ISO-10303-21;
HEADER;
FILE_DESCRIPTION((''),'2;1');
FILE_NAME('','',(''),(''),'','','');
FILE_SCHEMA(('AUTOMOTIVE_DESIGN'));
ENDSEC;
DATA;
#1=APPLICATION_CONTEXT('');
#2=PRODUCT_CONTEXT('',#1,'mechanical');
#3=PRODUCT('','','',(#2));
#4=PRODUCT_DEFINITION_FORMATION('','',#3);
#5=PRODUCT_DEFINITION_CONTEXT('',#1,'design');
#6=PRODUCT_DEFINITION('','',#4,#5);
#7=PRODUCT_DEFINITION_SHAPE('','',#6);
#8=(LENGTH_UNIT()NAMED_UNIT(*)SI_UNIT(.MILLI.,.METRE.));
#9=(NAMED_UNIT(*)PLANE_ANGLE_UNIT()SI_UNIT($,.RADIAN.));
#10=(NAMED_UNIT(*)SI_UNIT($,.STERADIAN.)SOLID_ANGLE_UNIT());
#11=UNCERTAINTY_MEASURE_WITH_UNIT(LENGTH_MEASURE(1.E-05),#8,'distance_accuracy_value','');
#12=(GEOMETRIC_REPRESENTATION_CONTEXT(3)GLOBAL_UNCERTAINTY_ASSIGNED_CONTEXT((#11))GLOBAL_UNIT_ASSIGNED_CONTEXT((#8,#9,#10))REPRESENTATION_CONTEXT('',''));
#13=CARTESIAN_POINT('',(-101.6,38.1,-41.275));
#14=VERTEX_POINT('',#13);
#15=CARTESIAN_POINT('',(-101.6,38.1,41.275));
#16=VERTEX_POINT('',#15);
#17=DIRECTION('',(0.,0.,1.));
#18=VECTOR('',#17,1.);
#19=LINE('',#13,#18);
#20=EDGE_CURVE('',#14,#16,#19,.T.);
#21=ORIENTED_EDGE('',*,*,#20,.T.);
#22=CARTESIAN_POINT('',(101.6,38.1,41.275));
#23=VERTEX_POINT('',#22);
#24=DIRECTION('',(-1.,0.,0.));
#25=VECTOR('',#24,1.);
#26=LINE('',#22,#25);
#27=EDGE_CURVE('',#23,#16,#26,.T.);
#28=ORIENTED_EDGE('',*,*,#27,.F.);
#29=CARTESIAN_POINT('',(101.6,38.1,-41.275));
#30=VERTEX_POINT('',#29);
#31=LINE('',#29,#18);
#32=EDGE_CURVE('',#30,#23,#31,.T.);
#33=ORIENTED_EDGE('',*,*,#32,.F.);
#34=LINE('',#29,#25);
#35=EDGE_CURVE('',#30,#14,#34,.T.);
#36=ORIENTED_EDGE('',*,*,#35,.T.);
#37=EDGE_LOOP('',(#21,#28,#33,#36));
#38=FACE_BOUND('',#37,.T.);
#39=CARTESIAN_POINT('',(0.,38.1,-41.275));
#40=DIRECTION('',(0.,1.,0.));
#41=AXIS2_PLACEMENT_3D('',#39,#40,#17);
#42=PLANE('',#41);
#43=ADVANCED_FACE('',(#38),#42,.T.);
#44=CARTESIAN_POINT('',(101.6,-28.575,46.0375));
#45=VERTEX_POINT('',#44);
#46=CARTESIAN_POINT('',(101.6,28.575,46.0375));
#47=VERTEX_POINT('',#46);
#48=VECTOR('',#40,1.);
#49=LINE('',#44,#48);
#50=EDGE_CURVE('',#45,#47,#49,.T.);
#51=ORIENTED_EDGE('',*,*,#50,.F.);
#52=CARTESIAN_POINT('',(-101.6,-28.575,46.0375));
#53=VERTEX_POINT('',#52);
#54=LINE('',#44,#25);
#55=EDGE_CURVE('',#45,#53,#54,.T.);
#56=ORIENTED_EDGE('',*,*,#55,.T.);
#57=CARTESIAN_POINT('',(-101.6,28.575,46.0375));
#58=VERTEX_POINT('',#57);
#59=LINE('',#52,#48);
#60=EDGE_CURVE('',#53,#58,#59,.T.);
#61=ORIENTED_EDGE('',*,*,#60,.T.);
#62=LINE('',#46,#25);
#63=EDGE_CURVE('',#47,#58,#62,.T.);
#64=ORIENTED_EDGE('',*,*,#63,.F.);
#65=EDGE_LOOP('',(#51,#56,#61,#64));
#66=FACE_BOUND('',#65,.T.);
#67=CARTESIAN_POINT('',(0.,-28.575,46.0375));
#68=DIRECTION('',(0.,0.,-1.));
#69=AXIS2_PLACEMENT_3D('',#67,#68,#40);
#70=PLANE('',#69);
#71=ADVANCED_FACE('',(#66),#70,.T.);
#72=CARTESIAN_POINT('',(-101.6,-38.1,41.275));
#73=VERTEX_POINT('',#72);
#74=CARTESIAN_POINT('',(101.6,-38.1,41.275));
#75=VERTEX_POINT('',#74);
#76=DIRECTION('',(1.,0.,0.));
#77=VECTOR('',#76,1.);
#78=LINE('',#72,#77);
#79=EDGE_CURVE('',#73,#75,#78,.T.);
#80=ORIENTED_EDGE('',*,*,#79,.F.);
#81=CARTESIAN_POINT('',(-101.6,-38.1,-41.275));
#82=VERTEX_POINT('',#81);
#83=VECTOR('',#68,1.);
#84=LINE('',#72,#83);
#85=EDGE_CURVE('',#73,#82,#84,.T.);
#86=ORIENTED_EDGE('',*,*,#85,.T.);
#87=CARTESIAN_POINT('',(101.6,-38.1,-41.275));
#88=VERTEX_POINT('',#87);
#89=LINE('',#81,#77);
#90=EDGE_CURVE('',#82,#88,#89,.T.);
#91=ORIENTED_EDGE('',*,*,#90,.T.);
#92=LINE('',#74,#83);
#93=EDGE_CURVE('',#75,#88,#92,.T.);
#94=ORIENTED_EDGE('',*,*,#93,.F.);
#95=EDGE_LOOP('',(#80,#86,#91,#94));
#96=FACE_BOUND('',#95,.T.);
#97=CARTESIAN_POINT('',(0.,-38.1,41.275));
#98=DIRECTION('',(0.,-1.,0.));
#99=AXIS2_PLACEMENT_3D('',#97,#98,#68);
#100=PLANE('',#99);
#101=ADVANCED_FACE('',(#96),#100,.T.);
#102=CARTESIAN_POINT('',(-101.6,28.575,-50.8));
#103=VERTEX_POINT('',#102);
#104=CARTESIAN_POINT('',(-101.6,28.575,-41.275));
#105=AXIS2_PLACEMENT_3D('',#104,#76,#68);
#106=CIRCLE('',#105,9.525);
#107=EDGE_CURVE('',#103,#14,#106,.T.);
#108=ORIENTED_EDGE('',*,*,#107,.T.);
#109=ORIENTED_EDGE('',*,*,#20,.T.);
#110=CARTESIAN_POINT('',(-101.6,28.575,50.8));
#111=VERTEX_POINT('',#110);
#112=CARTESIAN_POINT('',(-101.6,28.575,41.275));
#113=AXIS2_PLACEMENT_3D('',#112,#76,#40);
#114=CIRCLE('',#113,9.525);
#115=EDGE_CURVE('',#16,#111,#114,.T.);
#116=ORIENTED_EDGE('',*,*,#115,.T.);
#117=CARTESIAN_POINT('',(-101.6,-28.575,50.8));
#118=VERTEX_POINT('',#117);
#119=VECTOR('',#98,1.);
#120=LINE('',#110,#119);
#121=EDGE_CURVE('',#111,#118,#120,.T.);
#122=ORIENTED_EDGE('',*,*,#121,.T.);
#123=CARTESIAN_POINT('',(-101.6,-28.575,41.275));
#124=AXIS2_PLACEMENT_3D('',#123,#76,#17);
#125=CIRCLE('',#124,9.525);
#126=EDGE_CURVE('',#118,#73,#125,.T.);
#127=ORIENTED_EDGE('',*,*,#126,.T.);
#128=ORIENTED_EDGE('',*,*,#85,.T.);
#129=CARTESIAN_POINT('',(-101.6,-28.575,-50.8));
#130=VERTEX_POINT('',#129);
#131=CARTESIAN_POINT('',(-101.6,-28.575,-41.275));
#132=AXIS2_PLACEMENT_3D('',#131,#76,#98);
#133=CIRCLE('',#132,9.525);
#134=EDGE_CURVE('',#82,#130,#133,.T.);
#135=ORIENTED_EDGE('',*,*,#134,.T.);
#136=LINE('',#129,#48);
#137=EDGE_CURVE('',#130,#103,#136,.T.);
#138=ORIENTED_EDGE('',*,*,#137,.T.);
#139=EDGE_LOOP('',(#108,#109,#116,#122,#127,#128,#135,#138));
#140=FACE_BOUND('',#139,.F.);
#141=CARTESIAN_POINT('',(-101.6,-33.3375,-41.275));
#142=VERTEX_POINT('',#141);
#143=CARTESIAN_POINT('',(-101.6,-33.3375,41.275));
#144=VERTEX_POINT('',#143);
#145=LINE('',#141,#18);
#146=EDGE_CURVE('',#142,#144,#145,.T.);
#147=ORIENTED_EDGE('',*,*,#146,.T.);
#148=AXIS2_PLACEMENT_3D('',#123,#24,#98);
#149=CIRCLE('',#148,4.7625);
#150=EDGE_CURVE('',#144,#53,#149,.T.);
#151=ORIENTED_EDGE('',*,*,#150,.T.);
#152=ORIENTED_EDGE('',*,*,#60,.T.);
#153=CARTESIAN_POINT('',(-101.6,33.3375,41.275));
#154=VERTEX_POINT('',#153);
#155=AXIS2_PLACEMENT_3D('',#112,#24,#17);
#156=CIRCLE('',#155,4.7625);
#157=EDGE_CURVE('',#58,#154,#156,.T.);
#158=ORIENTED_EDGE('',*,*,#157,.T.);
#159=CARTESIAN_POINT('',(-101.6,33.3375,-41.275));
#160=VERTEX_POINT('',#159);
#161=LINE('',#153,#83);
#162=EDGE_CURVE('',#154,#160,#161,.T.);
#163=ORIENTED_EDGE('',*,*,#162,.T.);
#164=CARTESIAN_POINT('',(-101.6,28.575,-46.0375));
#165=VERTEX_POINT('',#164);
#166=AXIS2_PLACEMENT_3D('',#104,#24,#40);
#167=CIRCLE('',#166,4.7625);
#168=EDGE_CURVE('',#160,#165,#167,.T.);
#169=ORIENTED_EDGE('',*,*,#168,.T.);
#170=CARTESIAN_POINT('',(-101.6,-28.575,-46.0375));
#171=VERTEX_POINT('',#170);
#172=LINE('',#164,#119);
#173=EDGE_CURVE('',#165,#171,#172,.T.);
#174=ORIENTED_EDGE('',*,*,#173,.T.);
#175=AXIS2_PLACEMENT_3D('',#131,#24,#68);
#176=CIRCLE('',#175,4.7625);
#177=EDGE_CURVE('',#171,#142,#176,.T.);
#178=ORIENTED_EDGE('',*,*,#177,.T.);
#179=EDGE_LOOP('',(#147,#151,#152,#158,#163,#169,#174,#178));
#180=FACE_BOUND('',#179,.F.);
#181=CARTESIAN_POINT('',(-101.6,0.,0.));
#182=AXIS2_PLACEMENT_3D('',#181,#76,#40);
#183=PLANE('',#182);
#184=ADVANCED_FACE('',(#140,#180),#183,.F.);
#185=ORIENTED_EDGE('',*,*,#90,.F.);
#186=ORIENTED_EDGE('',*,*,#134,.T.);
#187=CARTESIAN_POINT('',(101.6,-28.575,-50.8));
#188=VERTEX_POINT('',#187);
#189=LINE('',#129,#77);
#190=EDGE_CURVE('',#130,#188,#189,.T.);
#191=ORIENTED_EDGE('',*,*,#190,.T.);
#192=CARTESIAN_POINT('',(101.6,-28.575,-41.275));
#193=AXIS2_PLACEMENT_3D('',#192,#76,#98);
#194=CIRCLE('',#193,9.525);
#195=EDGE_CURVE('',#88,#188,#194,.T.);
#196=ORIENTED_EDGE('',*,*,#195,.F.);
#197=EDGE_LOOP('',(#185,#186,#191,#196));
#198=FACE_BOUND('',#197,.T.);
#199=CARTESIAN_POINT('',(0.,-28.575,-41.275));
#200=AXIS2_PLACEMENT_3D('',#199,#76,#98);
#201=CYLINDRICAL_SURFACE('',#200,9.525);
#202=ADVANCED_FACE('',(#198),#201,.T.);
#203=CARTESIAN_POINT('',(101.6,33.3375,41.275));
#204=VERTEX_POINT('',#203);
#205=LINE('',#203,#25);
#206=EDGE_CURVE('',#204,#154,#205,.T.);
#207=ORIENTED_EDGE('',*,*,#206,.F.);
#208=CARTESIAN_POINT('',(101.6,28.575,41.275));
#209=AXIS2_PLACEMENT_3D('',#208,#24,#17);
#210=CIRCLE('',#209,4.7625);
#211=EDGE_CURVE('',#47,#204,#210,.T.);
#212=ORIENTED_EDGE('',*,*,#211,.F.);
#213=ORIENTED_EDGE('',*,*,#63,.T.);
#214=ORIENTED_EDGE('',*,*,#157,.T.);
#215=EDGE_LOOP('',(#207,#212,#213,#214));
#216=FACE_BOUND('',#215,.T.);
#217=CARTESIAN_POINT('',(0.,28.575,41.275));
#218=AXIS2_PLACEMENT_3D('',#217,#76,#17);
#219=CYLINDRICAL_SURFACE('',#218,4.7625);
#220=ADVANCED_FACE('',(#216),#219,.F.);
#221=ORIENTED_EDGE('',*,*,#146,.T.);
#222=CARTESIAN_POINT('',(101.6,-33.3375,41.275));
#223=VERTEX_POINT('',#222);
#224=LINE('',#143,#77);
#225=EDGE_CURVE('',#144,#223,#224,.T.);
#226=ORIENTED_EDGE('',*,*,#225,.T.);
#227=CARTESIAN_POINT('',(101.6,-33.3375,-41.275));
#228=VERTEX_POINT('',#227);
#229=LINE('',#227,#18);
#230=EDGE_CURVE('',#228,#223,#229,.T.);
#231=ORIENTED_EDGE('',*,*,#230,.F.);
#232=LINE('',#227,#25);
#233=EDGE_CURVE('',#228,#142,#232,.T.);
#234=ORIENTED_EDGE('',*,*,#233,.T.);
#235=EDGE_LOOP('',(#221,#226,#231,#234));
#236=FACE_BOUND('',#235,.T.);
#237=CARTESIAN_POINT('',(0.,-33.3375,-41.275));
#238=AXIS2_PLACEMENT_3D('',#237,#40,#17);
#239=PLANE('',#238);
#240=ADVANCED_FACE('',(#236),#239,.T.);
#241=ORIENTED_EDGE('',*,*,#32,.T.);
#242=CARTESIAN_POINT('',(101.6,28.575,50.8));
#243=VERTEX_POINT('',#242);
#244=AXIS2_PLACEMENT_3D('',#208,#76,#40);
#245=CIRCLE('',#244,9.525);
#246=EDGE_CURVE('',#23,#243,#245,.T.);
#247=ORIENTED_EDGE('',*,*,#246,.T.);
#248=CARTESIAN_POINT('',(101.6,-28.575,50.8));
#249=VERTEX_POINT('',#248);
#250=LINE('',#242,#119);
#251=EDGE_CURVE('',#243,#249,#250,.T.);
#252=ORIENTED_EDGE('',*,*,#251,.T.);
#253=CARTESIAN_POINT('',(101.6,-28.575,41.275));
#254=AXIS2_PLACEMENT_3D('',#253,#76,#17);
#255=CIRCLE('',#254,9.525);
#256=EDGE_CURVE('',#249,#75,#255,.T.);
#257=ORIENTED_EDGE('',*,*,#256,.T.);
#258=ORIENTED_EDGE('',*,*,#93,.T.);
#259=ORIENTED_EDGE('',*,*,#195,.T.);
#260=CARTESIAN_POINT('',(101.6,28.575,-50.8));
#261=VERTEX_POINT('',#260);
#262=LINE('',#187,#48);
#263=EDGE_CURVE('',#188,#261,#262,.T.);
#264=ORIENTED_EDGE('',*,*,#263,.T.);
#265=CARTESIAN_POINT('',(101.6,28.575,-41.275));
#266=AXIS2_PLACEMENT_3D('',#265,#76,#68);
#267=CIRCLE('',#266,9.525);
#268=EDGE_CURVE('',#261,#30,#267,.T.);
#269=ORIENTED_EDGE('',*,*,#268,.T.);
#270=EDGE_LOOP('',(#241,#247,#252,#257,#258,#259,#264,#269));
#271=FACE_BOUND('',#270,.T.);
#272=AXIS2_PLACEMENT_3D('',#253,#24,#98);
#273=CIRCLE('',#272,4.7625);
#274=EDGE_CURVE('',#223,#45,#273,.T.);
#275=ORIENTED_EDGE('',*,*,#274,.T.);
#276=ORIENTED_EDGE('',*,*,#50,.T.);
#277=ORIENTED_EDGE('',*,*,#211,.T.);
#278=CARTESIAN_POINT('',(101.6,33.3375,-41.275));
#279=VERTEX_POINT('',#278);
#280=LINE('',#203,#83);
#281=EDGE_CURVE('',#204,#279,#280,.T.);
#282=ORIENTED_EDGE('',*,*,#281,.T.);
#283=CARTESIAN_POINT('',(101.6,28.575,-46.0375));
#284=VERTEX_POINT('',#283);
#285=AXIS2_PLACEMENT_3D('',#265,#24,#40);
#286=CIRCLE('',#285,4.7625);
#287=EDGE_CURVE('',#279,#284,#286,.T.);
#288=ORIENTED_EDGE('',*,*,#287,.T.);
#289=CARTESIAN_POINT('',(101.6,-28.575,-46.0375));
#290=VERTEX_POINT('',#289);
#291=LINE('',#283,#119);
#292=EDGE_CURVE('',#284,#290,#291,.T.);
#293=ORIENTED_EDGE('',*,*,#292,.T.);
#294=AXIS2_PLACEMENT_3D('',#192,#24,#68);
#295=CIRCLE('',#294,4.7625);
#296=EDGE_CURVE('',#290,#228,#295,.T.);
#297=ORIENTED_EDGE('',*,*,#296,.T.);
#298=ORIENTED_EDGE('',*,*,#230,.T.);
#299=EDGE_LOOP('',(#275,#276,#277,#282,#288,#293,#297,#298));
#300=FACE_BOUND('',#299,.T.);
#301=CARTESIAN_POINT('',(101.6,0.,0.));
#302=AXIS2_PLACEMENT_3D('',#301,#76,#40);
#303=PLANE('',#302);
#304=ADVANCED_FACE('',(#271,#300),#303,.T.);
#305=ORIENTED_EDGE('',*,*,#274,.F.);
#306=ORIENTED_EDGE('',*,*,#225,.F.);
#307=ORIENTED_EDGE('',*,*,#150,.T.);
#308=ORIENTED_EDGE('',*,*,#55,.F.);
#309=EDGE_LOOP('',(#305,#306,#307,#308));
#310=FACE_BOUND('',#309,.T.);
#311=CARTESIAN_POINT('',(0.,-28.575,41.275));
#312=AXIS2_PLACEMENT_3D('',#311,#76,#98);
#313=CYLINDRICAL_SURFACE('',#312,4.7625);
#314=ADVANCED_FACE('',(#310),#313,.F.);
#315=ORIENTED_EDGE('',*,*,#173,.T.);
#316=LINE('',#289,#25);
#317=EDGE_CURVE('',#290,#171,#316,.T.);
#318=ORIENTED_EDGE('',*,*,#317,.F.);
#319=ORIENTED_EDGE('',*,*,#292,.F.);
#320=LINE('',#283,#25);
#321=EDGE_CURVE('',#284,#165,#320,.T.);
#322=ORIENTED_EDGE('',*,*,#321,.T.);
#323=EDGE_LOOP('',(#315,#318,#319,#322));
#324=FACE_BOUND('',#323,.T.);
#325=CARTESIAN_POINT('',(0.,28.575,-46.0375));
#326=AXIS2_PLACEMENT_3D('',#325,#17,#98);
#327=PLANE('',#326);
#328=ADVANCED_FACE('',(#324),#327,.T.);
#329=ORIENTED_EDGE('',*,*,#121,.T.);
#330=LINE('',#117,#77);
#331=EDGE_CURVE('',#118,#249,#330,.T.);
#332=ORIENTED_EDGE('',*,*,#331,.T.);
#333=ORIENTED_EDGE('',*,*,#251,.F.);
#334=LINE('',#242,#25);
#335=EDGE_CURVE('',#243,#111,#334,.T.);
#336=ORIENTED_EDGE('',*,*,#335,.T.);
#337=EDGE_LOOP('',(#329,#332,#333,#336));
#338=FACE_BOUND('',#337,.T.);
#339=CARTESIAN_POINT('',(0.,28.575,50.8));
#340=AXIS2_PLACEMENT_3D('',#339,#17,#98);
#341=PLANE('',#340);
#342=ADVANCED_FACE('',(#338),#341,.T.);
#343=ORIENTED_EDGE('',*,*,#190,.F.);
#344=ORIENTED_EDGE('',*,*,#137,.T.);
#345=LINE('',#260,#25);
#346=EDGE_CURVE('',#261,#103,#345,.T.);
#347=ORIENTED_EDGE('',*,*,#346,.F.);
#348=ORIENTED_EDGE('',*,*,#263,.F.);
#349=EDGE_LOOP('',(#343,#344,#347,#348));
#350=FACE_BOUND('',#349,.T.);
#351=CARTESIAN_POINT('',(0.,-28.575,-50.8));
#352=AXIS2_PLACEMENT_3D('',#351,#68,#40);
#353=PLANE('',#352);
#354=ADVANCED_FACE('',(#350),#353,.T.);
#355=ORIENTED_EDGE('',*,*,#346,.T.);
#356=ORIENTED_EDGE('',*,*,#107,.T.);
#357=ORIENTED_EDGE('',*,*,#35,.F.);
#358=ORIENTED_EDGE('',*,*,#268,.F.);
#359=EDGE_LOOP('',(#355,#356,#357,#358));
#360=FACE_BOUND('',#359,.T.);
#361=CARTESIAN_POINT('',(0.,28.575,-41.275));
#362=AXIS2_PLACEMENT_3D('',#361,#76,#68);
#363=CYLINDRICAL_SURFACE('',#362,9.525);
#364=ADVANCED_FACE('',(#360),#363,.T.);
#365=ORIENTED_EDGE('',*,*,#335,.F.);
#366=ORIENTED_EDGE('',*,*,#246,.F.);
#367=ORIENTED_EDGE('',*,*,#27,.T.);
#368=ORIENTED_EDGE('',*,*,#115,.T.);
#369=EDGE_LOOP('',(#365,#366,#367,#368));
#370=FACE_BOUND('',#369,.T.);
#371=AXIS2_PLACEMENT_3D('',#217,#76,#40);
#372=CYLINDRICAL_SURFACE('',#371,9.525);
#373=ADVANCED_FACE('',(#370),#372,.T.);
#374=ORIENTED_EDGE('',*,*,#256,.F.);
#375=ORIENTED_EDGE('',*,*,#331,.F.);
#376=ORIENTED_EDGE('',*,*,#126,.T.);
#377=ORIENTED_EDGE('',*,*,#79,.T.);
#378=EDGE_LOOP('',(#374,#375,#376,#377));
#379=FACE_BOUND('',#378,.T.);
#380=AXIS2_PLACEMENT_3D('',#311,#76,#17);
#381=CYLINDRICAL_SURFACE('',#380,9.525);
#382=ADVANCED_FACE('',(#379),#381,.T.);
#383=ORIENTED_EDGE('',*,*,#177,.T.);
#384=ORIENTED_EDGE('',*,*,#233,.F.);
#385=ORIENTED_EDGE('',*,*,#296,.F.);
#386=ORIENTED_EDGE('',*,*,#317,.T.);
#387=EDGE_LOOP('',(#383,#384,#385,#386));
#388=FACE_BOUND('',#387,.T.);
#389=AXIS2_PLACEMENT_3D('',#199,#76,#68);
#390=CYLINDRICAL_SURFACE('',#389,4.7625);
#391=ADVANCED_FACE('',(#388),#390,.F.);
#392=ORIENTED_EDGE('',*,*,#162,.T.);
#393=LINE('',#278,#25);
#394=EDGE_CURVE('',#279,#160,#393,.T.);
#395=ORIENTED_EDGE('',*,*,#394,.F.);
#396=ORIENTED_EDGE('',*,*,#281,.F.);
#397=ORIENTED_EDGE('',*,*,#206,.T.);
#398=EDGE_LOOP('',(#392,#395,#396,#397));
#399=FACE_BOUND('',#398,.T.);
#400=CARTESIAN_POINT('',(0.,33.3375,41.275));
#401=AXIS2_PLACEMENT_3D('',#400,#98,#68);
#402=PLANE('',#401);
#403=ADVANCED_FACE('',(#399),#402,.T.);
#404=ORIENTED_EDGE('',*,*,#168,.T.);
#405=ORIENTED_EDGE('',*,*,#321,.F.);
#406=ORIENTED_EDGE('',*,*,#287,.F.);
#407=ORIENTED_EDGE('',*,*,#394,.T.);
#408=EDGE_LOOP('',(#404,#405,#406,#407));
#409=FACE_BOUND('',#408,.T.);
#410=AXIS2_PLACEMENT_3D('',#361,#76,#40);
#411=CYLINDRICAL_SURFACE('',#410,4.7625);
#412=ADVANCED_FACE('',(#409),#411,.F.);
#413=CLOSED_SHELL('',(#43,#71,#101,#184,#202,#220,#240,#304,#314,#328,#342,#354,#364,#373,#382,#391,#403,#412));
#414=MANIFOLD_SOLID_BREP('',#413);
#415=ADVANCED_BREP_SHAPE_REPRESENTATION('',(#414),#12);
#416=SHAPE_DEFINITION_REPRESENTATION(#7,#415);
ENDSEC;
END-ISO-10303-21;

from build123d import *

# Parameters (mm, degrees)
F2_DEPTH = 101.6


# Not quite as in the source:
# - a variable given as a bare number and used for a length is read in inches; the dataset says mm whatever the document's units were


with BuildPart() as f2:
    # F1 (on Right) → F2 (new body, symmetric)
    with BuildSketch(Plane.YZ):
        with BuildLine():
            Line((28.575, 50.8), (-28.575, 50.8))
            ThreePointArc((-28.575, 50.8), (-35.3101920908, 48.0101920908), (-38.1, 41.275))
            Line((-38.1, 41.275), (-38.1, -41.275))
            ThreePointArc((-38.1, -41.275), (-35.3101920908, -48.0101920908), (-28.575, -50.8))
            Line((-28.575, -50.8), (28.575, -50.8))
            ThreePointArc((28.575, -50.8), (35.3101920908, -48.0101920908), (38.1, -41.275))
            Line((38.1, -41.275), (38.1, 41.275))
            ThreePointArc((38.1, 41.275), (35.3101920908, 48.0101920908), (28.575, 50.8))
        make_face()
        with BuildLine():
            ThreePointArc((-33.3375, 41.275), (-31.9425960454, 44.6425960454), (-28.575, 46.0375))
            Line((-28.575, 46.0375), (28.575, 46.0375))
            ThreePointArc((28.575, 46.0375), (31.9425960454, 44.6425960454), (33.3375, 41.275))
            Line((33.3375, 41.275), (33.3375, -41.275))
            ThreePointArc((33.3375, -41.275), (31.9425960454, -44.6425960454), (28.575, -46.0375))
            Line((28.575, -46.0375), (-28.575, -46.0375))
            ThreePointArc((-28.575, -46.0375), (-31.9425960454, -44.6425960454), (-33.3375, -41.275))
            Line((-33.3375, -41.275), (-33.3375, 41.275))
        make_face(mode=Mode.SUBTRACT)
    extrude(amount=F2_DEPTH, both=True)


solid = f2.part
